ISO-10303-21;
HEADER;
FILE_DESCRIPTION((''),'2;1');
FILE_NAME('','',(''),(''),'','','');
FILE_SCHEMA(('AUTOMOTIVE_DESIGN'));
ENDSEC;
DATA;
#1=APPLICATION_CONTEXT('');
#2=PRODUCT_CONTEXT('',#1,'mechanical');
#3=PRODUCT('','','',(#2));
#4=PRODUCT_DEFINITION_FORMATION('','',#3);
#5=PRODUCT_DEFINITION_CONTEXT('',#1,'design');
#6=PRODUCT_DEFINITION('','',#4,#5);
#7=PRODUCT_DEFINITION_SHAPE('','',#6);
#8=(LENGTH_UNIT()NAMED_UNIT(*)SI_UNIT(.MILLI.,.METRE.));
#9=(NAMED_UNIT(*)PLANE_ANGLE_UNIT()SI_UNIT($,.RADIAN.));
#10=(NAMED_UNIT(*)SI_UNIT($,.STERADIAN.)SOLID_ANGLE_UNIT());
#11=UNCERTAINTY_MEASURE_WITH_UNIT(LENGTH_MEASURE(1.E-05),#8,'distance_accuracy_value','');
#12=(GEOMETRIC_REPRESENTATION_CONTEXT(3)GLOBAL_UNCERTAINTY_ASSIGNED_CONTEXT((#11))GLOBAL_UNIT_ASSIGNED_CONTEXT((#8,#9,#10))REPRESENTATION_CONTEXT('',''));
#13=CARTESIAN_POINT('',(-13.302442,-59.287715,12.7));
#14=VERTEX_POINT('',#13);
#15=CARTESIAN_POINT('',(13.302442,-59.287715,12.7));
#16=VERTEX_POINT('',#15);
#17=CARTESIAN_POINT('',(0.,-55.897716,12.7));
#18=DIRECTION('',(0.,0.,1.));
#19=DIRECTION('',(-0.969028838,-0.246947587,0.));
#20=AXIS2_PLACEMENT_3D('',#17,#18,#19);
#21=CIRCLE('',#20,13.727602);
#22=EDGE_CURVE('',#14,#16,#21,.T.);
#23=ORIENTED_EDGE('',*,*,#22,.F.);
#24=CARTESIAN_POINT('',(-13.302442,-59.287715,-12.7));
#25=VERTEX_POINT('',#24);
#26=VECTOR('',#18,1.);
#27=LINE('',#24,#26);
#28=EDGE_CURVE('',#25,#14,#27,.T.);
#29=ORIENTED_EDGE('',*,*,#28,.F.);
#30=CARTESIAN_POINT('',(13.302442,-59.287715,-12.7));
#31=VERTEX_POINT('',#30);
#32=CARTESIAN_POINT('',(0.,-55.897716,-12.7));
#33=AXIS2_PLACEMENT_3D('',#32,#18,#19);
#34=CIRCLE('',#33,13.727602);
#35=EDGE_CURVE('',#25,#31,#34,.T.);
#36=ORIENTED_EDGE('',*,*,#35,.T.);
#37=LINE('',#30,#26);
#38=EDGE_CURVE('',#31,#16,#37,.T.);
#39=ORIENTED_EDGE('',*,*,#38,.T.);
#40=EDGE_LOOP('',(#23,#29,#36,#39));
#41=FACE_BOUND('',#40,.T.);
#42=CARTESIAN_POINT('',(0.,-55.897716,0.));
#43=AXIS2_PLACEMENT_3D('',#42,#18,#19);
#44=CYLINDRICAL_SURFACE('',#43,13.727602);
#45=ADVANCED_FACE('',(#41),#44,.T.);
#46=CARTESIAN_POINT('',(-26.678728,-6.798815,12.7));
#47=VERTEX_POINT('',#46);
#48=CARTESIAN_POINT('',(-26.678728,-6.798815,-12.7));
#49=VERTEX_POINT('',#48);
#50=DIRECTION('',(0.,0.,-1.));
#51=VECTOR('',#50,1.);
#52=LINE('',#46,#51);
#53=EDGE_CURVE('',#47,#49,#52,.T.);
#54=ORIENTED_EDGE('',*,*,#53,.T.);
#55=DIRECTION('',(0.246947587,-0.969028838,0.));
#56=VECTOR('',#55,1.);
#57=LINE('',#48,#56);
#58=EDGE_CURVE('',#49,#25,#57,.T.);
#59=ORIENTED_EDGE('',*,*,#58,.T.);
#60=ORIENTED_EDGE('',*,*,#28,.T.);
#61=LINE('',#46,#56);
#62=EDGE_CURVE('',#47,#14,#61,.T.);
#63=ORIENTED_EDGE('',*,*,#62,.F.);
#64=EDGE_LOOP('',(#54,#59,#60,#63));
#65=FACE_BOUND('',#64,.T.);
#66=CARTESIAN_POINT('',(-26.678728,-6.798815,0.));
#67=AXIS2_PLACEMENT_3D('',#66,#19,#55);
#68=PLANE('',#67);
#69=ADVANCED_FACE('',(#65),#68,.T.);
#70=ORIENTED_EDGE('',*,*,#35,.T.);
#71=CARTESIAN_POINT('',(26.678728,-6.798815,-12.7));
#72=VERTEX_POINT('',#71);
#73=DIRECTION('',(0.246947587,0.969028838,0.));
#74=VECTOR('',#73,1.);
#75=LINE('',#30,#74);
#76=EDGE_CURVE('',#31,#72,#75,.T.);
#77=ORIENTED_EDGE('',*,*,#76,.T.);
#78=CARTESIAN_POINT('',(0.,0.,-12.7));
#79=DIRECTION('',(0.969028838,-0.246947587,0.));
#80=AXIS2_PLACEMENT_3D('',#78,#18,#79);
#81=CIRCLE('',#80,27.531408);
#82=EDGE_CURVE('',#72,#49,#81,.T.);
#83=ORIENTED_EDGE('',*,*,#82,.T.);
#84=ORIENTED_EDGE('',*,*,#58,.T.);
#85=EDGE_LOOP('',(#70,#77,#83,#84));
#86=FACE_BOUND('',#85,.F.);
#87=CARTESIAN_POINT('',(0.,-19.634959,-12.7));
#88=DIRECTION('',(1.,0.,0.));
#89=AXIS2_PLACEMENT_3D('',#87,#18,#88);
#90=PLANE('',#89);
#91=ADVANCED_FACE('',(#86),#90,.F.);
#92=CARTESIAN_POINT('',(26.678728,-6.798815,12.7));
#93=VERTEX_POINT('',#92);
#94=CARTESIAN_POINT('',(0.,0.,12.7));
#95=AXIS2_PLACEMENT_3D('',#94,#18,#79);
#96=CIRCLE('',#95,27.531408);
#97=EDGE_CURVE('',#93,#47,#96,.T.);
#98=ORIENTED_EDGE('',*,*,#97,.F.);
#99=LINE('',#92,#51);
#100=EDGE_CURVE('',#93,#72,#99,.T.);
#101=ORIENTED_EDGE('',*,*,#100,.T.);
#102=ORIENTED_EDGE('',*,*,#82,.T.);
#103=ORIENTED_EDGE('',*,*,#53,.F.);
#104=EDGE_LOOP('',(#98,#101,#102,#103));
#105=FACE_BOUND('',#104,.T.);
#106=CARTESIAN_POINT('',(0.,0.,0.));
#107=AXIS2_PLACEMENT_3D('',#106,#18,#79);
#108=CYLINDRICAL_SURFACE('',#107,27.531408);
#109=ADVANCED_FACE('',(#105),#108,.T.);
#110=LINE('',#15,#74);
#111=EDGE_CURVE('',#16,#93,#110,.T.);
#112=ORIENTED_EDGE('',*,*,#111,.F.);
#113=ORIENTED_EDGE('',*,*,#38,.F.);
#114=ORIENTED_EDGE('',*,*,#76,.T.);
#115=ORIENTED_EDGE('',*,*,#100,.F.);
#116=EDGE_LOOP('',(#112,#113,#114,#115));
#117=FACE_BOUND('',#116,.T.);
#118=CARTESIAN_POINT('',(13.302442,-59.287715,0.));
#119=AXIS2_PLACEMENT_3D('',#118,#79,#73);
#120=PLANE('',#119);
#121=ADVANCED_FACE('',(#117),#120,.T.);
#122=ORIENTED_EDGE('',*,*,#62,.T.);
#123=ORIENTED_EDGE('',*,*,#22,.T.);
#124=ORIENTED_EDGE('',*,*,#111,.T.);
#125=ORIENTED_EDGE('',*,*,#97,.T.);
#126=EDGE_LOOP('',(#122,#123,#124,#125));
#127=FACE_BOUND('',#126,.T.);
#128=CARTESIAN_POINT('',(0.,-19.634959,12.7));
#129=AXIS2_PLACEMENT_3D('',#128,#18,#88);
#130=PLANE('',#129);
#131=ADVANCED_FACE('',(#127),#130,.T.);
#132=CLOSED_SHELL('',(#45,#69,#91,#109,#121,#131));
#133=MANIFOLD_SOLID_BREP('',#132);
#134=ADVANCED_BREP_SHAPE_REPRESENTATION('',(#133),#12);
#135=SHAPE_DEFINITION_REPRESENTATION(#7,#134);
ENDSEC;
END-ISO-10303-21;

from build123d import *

# Parameters (mm, degrees)
F1_DEPTH = 12.7


# Not quite as in the source:
# - a feature names something its author has since deleted; it is built from what else it names


with BuildPart() as f1:
    # F0 (on Top) → F1 (new body, symmetric)
    with BuildSketch(Plane.XY):
        with BuildLine():
            Line((-26.6787280744, -6.7988147188), (-13.3024417869, -59.2877145153))
            ThreePointArc((-13.3024417869, -59.2877145153), (0, -69.6253179893), (13.3024417869, -59.2877145153))
            Line((13.3024417869, -59.2877145153), (26.6787280744, -6.7988147188))
            ThreePointArc((26.6787280744, -6.7988147188), (0, 27.53140776), (-26.6787280744, -6.7988147188))
        make_face()
    extrude(amount=F1_DEPTH, both=True)


solid = f1.part
